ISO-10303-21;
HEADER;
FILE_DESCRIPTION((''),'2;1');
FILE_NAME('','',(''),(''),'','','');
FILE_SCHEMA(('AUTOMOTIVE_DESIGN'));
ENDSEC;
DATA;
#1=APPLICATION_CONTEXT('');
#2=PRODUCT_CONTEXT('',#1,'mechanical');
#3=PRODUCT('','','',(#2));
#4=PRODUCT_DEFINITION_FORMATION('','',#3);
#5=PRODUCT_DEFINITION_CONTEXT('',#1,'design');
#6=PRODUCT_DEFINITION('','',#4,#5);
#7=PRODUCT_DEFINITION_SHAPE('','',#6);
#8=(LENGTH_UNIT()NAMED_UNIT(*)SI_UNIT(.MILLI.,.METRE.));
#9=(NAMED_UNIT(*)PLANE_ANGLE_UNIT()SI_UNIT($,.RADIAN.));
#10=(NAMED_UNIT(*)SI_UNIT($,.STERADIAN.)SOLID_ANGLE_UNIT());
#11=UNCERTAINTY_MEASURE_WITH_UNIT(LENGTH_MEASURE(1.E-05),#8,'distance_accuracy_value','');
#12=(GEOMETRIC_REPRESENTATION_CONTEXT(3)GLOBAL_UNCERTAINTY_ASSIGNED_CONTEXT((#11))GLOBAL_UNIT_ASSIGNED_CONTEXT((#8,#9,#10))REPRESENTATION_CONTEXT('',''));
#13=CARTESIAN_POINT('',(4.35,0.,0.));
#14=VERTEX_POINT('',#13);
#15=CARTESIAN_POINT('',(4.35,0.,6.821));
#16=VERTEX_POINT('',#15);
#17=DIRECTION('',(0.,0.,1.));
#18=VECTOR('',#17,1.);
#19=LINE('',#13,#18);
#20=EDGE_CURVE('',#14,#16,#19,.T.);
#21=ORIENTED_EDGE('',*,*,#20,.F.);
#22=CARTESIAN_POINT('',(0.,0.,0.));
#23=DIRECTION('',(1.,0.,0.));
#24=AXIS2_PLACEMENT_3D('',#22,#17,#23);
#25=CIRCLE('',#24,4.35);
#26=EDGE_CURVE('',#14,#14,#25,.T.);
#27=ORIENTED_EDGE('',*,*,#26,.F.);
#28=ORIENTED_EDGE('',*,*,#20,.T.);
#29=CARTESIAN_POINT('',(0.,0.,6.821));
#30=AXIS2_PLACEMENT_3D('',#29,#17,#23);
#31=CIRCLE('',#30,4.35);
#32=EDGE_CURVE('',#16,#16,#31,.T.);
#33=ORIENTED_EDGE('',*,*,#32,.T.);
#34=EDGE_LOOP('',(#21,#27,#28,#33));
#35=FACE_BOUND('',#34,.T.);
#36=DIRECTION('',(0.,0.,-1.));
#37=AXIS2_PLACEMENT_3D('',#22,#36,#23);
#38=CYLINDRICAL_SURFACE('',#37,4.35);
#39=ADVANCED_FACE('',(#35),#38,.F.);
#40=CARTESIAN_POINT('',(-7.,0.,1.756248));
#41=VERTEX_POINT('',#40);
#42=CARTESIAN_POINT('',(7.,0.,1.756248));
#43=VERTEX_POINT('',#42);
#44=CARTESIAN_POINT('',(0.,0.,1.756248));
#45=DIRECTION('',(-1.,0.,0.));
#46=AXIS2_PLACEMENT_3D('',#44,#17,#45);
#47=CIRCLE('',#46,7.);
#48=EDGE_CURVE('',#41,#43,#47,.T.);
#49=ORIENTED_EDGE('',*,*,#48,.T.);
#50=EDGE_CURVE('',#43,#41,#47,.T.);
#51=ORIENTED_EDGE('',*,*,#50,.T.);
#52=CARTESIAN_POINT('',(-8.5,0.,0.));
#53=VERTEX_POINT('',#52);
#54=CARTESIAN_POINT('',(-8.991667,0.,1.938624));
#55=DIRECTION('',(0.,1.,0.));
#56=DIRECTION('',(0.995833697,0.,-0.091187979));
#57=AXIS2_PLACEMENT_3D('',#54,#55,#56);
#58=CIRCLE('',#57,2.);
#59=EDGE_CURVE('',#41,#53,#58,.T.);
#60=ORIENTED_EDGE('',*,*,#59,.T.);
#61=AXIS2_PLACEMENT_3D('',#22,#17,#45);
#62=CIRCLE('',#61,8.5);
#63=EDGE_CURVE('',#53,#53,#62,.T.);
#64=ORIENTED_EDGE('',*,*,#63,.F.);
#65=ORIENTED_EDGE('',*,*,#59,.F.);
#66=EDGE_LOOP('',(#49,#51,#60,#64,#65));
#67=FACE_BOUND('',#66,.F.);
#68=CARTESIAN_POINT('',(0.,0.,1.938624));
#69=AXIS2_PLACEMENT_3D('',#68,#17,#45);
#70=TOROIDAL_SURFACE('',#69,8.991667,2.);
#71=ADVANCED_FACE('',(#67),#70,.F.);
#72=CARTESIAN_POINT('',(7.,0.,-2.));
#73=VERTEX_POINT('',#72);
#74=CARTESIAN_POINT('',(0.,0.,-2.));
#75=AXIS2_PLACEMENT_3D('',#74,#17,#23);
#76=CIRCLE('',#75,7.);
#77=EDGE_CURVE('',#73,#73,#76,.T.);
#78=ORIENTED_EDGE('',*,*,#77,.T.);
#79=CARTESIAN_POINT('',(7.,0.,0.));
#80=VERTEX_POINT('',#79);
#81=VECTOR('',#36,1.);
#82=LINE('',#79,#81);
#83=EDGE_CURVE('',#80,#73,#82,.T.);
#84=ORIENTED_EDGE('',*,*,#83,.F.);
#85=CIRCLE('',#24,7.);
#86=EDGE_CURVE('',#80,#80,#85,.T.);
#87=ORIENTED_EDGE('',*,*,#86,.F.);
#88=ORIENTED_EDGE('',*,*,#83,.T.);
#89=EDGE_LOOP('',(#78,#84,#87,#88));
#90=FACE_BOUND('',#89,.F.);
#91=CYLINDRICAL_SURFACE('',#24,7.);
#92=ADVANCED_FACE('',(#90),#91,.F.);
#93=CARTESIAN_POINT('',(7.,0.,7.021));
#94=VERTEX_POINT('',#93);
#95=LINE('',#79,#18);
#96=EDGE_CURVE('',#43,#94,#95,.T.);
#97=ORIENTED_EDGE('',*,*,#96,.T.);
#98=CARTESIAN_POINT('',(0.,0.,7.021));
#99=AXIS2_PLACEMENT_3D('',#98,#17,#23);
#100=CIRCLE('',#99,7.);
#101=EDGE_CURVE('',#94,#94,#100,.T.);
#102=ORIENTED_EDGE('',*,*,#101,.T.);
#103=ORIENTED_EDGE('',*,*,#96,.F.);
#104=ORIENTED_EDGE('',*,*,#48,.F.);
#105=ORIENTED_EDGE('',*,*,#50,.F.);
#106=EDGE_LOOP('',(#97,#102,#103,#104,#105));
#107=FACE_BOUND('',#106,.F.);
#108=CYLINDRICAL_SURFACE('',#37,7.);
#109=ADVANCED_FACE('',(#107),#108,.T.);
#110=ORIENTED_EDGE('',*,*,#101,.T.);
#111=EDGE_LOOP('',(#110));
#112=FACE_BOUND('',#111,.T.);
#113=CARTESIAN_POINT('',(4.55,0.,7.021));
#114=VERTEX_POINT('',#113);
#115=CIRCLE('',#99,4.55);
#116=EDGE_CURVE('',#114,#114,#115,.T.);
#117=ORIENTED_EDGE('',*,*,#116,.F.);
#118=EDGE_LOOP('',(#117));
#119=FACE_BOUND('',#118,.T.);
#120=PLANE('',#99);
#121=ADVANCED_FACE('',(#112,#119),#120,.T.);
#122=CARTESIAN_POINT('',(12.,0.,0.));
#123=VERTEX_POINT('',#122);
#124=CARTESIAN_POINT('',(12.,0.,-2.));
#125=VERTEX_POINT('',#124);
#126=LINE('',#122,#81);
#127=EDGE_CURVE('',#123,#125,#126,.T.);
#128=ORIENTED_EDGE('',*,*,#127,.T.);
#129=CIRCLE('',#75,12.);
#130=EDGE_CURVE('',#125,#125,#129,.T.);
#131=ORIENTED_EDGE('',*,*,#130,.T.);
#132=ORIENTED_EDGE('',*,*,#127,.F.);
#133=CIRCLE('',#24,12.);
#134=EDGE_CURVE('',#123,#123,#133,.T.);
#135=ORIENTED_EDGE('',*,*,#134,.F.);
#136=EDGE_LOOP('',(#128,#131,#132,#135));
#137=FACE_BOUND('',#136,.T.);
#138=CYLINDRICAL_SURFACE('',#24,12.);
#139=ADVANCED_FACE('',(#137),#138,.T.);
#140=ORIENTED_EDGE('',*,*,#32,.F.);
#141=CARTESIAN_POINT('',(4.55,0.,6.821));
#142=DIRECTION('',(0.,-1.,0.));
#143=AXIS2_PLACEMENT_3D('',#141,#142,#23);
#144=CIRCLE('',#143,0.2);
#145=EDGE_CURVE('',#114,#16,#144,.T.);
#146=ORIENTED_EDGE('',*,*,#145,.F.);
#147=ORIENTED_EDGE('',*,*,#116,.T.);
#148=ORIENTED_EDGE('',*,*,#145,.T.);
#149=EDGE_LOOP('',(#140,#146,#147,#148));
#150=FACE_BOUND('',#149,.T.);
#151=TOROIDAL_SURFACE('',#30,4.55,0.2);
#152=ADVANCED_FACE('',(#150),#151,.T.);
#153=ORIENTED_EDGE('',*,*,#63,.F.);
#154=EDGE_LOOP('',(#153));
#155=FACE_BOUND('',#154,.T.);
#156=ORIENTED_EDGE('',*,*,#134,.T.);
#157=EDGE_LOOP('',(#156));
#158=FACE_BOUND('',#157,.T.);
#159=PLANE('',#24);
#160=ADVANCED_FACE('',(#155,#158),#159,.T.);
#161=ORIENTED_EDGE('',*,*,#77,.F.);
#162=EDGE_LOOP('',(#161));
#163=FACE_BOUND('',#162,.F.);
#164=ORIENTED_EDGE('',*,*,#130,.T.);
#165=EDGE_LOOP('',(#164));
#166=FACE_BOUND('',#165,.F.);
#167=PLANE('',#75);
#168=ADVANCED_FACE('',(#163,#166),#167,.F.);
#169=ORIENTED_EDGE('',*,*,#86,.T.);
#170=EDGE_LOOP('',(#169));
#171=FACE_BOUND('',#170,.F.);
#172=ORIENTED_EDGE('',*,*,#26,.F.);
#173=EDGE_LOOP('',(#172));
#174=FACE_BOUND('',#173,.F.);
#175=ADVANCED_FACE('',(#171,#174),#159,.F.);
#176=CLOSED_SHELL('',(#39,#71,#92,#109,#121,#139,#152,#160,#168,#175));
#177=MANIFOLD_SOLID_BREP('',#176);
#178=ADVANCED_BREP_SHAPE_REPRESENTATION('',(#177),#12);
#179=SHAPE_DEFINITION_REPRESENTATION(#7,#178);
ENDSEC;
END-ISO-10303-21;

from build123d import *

# Parameters (mm, degrees)
F0_R     = 12
F0_R_2   = 7
F1_DEPTH = 2
F0_R_3   = 4.35
F2_DEPTH = 7.021
F8_R     = 0.2


with BuildPart() as f1:
    # F0 (on Top) → F1 (new body)
    with BuildSketch(Plane.XY):
        Circle(F0_R)
        Circle(F0_R_2, mode=Mode.SUBTRACT)
    extrude(amount=-F1_DEPTH)

    # F0 (on Top) → F2 (join)
    with BuildSketch(Plane.XY):
        Circle(F0_R_2)
        Circle(F0_R_3, mode=Mode.SUBTRACT)
    extrude(amount=F2_DEPTH)

    # F6 (on Front) → F7 (revolve)
    with BuildSketch(Plane.XZ):
        with BuildLine():
            ThreePointArc((-7, 1.7562480825), (-7.4708650568, 0.639716712), (-8.5, 0))
            Line((-8.5, 0), (-7, 0))
            Line((-7, 0), (-7, 1.7562480825))
        make_face()
    revolve(axis=Axis((0, 0, 5.6352536849), (0, 0, 1)))

    # F8
    f8_edges = [f1.edges().sort_by_distance(p)[0] for p in [
        (-4.35, 0, 7.021),
    ]]
    fillet(f8_edges, radius=F8_R)


solid = f1.part
